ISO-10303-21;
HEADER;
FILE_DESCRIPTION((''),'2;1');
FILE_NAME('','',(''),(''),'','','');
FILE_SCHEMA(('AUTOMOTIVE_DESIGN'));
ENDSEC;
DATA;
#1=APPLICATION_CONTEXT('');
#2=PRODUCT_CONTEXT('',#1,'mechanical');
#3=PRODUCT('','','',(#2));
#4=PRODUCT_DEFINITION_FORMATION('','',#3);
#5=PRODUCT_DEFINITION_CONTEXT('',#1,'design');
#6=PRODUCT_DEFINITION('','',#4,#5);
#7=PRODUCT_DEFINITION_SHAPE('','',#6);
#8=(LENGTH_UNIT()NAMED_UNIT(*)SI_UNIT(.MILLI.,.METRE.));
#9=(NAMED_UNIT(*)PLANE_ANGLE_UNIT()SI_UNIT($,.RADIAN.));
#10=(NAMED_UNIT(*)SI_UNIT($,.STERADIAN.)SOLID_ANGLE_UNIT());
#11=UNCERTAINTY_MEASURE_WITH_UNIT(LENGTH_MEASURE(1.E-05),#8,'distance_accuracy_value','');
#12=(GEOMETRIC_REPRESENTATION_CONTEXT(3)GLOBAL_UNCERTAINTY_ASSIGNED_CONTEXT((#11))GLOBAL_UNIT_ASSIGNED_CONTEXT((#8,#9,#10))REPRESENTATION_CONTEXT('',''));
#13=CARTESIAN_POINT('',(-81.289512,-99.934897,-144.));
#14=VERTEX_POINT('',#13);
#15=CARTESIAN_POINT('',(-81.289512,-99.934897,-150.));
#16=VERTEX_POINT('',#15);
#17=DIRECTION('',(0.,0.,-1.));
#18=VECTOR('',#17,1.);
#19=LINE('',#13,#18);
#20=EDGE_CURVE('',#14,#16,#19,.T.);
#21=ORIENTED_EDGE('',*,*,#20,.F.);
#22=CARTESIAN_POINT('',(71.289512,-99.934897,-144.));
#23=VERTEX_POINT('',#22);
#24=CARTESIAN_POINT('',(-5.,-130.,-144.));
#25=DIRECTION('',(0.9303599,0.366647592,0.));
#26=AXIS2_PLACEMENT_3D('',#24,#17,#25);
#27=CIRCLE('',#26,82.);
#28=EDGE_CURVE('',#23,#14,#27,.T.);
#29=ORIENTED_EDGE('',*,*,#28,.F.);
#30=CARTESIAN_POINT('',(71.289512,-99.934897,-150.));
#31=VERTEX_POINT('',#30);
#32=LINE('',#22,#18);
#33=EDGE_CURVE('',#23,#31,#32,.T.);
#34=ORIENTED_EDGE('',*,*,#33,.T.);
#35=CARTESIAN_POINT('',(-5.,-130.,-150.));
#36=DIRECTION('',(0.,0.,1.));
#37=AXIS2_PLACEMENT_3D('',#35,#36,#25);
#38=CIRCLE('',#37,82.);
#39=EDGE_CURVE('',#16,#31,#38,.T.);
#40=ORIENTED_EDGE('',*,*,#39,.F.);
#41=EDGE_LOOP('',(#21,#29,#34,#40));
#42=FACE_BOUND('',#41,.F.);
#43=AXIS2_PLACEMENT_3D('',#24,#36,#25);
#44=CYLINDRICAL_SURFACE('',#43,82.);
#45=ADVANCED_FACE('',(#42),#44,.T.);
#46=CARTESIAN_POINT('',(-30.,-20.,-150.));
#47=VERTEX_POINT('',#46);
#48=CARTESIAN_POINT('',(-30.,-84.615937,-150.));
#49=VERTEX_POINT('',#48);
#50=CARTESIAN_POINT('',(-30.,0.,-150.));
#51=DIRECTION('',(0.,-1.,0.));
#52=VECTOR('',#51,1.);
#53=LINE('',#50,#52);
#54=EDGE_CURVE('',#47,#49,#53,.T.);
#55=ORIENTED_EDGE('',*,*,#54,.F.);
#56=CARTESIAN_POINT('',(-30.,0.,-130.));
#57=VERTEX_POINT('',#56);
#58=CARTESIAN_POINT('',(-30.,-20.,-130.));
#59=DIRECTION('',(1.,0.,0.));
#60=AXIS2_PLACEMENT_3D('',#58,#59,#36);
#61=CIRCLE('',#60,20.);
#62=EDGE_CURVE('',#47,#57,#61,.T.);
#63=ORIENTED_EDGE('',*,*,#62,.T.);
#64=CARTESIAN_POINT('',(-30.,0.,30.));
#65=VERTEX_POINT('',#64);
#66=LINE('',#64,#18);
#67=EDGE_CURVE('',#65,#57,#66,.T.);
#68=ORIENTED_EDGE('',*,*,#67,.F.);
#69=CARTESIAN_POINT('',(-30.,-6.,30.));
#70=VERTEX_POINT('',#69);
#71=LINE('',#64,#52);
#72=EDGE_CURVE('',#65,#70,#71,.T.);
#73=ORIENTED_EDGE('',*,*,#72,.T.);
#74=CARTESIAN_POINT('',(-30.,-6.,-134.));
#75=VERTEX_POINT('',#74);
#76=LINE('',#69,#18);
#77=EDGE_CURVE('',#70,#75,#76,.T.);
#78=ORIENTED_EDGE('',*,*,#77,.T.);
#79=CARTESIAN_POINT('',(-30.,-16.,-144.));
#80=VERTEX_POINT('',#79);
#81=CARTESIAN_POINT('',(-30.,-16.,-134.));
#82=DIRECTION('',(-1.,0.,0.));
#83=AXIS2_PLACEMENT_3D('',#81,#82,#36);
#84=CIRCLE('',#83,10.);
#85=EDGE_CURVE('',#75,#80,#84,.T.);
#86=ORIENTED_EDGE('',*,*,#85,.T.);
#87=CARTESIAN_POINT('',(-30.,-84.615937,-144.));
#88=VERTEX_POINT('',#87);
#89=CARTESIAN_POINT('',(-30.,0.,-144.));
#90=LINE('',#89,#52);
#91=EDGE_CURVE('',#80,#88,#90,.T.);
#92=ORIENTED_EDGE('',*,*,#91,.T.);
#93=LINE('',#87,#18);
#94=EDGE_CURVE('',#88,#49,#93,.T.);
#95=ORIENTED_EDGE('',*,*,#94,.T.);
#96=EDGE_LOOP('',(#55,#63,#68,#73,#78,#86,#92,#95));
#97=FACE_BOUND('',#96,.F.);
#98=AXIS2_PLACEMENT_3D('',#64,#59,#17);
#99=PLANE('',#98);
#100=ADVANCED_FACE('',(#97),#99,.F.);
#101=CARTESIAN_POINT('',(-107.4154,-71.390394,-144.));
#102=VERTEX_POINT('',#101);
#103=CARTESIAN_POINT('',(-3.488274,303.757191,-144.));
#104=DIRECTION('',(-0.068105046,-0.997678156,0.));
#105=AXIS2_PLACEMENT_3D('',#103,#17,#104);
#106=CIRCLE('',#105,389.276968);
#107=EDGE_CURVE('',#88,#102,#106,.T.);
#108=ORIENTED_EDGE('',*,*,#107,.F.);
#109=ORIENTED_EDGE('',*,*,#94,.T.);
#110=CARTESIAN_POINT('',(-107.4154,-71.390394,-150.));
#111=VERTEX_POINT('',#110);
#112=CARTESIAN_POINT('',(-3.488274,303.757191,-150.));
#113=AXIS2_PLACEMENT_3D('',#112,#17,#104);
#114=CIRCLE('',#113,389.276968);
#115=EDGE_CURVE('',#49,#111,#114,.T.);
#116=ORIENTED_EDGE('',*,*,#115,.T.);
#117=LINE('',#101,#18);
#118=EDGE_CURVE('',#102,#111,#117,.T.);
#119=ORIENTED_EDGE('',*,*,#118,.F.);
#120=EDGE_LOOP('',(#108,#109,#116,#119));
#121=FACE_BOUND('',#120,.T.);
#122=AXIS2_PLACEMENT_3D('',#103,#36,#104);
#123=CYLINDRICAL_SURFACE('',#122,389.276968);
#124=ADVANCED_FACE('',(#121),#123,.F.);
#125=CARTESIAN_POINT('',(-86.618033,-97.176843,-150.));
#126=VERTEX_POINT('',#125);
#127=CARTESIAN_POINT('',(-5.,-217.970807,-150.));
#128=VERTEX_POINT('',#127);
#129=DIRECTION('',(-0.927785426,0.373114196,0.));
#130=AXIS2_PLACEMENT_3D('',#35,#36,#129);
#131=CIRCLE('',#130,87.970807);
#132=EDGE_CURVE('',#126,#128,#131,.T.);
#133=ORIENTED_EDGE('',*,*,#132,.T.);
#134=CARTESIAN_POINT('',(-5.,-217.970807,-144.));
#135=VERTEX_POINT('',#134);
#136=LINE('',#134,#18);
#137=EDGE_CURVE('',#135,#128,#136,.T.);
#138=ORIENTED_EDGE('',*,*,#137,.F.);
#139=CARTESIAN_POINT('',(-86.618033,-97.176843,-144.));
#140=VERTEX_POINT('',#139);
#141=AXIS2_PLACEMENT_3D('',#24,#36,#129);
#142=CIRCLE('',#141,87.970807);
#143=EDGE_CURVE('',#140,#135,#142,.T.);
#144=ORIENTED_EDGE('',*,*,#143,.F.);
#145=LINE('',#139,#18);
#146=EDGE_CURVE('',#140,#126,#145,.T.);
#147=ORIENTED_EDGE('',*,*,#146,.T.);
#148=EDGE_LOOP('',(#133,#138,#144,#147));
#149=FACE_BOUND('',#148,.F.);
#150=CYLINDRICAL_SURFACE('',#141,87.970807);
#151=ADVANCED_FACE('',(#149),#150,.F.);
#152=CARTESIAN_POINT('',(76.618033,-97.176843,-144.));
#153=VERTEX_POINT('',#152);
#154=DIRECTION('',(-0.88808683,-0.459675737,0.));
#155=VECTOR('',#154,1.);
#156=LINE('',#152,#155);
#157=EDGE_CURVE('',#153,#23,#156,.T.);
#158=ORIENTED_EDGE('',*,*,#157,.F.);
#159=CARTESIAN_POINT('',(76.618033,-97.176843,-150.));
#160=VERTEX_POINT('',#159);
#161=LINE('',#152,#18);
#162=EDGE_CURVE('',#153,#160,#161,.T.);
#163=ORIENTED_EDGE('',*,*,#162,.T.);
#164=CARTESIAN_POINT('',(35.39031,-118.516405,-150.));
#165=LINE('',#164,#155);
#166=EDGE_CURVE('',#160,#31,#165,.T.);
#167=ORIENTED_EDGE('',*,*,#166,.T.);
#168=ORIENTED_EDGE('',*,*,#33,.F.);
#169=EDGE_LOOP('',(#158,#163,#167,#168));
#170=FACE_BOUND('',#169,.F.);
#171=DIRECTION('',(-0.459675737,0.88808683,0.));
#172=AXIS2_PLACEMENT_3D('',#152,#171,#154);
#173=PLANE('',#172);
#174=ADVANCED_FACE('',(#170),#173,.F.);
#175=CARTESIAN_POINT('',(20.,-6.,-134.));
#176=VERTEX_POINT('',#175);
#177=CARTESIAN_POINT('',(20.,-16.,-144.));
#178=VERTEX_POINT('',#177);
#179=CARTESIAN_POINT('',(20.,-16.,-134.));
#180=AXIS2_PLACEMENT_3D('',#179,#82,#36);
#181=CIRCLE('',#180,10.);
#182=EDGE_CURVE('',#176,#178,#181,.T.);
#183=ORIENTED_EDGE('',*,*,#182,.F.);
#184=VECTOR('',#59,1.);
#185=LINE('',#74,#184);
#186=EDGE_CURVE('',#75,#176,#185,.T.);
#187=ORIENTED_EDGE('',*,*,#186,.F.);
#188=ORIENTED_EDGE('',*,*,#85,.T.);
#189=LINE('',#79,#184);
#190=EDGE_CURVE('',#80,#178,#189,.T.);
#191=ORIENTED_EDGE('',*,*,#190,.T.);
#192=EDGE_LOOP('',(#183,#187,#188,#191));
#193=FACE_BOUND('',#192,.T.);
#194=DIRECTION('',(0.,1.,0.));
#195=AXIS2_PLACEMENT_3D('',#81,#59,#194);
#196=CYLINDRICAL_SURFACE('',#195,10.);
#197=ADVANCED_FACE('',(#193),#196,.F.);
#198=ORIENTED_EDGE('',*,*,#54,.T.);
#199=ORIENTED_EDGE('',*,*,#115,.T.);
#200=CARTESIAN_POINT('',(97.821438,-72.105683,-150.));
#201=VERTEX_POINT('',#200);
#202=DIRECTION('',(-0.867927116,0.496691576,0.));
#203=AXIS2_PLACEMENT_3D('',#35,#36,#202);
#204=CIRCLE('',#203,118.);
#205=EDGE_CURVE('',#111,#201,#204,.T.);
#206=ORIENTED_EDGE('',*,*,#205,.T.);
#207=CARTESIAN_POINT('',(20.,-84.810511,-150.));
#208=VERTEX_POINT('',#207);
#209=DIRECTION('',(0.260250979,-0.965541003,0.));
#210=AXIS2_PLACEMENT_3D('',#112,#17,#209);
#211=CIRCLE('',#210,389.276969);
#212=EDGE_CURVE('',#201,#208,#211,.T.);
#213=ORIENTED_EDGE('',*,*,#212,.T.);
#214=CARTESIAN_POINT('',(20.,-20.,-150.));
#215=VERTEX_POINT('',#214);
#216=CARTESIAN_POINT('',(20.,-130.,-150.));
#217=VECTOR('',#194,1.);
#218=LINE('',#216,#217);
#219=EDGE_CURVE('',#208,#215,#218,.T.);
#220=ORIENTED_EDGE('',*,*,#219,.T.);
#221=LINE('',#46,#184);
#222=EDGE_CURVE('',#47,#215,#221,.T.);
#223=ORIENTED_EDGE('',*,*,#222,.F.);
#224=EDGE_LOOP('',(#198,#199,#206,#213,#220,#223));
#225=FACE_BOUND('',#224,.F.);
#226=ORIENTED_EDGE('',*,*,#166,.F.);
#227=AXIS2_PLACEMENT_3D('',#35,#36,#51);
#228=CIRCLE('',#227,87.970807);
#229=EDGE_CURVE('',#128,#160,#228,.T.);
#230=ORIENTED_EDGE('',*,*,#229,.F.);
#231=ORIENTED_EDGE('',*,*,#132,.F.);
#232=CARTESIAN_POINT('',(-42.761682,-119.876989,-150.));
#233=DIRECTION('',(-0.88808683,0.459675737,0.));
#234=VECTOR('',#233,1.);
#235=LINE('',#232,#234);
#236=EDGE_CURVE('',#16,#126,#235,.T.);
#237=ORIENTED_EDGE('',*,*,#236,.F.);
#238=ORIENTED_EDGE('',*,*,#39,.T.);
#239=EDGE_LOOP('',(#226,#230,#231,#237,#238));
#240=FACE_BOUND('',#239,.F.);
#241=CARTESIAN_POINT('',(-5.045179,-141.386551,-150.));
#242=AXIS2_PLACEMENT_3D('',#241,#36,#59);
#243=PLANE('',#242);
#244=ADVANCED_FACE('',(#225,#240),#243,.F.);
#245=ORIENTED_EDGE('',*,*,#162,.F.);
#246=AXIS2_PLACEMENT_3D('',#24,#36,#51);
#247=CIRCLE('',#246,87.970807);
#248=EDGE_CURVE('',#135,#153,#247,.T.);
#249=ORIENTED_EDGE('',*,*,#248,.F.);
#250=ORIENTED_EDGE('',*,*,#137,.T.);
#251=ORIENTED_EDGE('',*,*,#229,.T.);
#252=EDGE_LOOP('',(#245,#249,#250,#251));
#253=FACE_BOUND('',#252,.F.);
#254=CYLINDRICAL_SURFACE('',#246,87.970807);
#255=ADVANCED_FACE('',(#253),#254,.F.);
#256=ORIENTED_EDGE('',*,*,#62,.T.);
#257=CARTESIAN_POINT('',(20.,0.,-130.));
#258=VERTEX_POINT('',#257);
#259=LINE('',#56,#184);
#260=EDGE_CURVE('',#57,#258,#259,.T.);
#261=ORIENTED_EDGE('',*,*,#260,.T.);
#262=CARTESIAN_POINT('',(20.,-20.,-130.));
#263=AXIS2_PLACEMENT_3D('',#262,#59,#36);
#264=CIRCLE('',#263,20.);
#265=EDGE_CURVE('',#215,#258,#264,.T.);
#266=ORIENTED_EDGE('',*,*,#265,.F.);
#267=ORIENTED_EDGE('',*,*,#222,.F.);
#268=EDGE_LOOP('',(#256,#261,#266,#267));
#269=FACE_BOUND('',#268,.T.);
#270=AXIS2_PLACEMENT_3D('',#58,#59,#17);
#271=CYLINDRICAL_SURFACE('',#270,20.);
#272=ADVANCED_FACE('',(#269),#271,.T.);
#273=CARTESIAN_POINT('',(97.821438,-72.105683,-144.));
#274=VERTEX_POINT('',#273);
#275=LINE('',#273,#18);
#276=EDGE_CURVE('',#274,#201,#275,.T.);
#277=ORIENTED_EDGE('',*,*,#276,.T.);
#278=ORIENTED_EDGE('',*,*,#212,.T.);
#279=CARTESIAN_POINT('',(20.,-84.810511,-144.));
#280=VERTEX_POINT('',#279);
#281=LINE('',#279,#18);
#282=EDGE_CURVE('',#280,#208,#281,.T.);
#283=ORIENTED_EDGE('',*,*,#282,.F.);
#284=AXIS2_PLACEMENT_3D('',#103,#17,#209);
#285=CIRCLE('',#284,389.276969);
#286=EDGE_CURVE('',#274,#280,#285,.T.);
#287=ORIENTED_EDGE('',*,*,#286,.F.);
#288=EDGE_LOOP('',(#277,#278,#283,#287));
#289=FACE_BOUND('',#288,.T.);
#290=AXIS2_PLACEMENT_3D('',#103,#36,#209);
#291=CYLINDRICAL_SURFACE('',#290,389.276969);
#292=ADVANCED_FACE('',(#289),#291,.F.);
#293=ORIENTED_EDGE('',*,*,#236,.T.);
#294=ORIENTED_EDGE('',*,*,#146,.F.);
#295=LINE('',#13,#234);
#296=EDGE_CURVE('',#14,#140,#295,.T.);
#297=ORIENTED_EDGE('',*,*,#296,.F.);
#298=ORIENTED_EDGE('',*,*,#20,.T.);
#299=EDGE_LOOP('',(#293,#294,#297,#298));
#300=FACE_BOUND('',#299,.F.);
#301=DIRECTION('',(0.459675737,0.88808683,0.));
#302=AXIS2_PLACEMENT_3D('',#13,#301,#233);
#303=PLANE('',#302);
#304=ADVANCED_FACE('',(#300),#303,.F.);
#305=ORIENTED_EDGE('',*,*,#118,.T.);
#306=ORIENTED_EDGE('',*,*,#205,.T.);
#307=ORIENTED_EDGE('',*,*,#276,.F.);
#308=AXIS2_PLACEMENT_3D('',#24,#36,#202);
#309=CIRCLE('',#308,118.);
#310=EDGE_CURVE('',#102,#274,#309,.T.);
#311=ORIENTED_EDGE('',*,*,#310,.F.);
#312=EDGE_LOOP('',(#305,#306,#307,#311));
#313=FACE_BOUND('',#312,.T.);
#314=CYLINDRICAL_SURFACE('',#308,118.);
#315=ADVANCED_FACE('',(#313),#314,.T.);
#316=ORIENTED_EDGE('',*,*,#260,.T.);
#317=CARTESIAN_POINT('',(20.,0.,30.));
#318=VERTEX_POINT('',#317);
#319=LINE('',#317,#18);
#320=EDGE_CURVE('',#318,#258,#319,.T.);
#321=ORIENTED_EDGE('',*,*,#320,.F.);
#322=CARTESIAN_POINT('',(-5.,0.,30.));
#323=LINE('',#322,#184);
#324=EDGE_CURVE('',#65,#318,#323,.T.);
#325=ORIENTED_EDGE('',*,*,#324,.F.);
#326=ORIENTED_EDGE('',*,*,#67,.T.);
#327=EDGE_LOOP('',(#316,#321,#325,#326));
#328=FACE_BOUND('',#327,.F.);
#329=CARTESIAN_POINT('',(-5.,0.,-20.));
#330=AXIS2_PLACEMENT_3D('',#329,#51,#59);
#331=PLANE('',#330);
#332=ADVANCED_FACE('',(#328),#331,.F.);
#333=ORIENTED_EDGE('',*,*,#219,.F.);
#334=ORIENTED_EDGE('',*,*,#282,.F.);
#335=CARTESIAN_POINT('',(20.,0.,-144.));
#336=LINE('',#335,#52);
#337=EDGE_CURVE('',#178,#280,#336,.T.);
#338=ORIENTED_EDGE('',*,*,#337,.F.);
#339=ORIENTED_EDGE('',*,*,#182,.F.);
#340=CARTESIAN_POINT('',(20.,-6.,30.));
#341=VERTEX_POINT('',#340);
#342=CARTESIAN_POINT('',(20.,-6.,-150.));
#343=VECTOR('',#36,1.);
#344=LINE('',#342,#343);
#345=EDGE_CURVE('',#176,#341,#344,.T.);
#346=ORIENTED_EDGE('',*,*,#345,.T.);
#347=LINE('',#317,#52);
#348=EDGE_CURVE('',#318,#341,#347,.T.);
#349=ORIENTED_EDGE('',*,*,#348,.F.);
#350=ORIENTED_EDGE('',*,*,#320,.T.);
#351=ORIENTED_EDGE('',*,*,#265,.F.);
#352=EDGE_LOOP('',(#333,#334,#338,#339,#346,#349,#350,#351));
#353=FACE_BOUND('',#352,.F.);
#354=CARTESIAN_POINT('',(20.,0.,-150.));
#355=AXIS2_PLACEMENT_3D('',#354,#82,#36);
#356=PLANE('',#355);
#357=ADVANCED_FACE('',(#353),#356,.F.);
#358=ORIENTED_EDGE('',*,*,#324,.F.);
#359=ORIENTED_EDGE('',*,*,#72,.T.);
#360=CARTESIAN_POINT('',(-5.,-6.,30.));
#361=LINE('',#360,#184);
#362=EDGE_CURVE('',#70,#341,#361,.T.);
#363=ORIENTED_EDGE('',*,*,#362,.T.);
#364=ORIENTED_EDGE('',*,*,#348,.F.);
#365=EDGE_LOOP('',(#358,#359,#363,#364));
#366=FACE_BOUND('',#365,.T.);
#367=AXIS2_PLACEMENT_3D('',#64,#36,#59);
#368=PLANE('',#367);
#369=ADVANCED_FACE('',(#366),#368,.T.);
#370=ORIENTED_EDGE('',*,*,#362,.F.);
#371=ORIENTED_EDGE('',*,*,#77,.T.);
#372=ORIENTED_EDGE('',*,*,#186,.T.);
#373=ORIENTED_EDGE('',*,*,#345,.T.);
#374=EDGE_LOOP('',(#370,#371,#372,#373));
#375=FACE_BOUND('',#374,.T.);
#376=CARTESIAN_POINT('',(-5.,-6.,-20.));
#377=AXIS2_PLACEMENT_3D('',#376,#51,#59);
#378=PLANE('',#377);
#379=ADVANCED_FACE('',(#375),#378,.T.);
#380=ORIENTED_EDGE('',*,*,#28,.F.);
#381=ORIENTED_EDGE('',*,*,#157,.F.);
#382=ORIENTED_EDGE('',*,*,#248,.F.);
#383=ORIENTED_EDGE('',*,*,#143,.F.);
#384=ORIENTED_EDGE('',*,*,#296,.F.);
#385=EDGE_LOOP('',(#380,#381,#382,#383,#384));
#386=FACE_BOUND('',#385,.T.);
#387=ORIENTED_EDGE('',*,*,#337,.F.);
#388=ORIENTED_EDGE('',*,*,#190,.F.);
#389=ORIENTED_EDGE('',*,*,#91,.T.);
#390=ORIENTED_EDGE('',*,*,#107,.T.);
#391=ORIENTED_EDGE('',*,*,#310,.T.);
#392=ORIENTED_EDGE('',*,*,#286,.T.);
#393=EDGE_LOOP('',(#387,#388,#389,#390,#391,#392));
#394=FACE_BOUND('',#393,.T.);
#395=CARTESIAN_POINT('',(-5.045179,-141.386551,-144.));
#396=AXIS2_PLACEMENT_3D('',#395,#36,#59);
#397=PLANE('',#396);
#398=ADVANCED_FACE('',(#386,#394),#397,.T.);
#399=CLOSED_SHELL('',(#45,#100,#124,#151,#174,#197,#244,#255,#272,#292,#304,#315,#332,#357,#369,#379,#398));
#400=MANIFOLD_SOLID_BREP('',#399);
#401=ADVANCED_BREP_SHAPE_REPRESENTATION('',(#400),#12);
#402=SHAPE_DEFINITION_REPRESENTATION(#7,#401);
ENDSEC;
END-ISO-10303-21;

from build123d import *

# Parameters (mm, degrees)
F0_W     = 50
F0_H     = 6
F2_DEPTH = 130
F0_H_2   = 100
F0_H_3   = 74
F3_DEPTH = 6
F4_R     = 20
F5_R     = 10
F7_DEPTH = 6
F9_DEPTH = 31


# Not quite as in the source:
# - a feature names something its author has since deleted; it is built from what else it names


with BuildPart() as f2:
    # F0 (on Front) → F2 (new body)
    with BuildSketch(Plane.XZ):
        with Locations((-5, -147)):
            Rectangle(F0_W, F0_H)
    extrude(amount=F2_DEPTH)

    # F0 (on Front) → F3 (join)
    with BuildSketch(Plane.XZ):
        with Locations((-5, -20)):
            Rectangle(F0_W, F0_H_2)
        with Locations((-5, -107)):
            Rectangle(F0_W, F0_H_3)
        with Locations((-5, -147)):
            Rectangle(F0_W, F0_H)
    extrude(amount=F3_DEPTH)

    # F4
    f4_edges = [f2.edges().sort_by_distance(p)[0] for p in [
        (-5, 0, -150),
    ]]
    fillet(f4_edges, radius=F4_R)

    # F5
    f5_edges = [f2.edges().sort_by_distance(p)[0] for p in [
        (-5, -6, -144),
    ]]
    fillet(f5_edges, radius=F5_R)

    # F6 (on face) → F7 (join)
    with BuildSketch(Plane.XY.offset(-144)):
        with BuildLine():
            ThreePointArc((-30, -84.6159367699), (-69.042085877, -79.9604861418), (-107.415399673, -71.3903940482))
            ThreePointArc((-107.415399673, -71.3903940482), (-5.4112498239, -247.9992833605), (97.8214378821, -72.1056832508))
            ThreePointArc((97.8214378821, -72.1056832508), (59.233233327, -80.4336085853), (20, -84.8105109003))
            Line((20, -84.8105109003), (20, -130))
            Line((20, -130), (-30, -130))
            Line((-30, -130), (-30, -84.6159367699))
        make_face()
    extrude(amount=-F7_DEPTH)

    # F8 (on face) → F9 (cut)
    with BuildSketch(Plane.XY.offset(-144)):
        with BuildLine():
            Line((-81.2895118016, -99.9348974879), (-86.618032779, -97.1768430661))
            ThreePointArc((-86.618032779, -97.1768430661), (-77.8915033239, -179.2513111401), (-5, -217.9708071228))
            ThreePointArc((-5, -217.9708071228), (67.8915033239, -179.2513111401), (76.618032779, -97.1768430661))
            Line((76.618032779, -97.1768430661), (71.2895118016, -99.9348974879))
            ThreePointArc((71.2895118016, -99.9348974879), (62.7839892821, -176.1446724661), (-5, -212))
            ThreePointArc((-5, -212), (-72.7839892821, -176.1446724661), (-81.2895118016, -99.9348974879))
        make_face()
    extrude(amount=-F9_DEPTH, mode=Mode.SUBTRACT)


solid = f2.part
